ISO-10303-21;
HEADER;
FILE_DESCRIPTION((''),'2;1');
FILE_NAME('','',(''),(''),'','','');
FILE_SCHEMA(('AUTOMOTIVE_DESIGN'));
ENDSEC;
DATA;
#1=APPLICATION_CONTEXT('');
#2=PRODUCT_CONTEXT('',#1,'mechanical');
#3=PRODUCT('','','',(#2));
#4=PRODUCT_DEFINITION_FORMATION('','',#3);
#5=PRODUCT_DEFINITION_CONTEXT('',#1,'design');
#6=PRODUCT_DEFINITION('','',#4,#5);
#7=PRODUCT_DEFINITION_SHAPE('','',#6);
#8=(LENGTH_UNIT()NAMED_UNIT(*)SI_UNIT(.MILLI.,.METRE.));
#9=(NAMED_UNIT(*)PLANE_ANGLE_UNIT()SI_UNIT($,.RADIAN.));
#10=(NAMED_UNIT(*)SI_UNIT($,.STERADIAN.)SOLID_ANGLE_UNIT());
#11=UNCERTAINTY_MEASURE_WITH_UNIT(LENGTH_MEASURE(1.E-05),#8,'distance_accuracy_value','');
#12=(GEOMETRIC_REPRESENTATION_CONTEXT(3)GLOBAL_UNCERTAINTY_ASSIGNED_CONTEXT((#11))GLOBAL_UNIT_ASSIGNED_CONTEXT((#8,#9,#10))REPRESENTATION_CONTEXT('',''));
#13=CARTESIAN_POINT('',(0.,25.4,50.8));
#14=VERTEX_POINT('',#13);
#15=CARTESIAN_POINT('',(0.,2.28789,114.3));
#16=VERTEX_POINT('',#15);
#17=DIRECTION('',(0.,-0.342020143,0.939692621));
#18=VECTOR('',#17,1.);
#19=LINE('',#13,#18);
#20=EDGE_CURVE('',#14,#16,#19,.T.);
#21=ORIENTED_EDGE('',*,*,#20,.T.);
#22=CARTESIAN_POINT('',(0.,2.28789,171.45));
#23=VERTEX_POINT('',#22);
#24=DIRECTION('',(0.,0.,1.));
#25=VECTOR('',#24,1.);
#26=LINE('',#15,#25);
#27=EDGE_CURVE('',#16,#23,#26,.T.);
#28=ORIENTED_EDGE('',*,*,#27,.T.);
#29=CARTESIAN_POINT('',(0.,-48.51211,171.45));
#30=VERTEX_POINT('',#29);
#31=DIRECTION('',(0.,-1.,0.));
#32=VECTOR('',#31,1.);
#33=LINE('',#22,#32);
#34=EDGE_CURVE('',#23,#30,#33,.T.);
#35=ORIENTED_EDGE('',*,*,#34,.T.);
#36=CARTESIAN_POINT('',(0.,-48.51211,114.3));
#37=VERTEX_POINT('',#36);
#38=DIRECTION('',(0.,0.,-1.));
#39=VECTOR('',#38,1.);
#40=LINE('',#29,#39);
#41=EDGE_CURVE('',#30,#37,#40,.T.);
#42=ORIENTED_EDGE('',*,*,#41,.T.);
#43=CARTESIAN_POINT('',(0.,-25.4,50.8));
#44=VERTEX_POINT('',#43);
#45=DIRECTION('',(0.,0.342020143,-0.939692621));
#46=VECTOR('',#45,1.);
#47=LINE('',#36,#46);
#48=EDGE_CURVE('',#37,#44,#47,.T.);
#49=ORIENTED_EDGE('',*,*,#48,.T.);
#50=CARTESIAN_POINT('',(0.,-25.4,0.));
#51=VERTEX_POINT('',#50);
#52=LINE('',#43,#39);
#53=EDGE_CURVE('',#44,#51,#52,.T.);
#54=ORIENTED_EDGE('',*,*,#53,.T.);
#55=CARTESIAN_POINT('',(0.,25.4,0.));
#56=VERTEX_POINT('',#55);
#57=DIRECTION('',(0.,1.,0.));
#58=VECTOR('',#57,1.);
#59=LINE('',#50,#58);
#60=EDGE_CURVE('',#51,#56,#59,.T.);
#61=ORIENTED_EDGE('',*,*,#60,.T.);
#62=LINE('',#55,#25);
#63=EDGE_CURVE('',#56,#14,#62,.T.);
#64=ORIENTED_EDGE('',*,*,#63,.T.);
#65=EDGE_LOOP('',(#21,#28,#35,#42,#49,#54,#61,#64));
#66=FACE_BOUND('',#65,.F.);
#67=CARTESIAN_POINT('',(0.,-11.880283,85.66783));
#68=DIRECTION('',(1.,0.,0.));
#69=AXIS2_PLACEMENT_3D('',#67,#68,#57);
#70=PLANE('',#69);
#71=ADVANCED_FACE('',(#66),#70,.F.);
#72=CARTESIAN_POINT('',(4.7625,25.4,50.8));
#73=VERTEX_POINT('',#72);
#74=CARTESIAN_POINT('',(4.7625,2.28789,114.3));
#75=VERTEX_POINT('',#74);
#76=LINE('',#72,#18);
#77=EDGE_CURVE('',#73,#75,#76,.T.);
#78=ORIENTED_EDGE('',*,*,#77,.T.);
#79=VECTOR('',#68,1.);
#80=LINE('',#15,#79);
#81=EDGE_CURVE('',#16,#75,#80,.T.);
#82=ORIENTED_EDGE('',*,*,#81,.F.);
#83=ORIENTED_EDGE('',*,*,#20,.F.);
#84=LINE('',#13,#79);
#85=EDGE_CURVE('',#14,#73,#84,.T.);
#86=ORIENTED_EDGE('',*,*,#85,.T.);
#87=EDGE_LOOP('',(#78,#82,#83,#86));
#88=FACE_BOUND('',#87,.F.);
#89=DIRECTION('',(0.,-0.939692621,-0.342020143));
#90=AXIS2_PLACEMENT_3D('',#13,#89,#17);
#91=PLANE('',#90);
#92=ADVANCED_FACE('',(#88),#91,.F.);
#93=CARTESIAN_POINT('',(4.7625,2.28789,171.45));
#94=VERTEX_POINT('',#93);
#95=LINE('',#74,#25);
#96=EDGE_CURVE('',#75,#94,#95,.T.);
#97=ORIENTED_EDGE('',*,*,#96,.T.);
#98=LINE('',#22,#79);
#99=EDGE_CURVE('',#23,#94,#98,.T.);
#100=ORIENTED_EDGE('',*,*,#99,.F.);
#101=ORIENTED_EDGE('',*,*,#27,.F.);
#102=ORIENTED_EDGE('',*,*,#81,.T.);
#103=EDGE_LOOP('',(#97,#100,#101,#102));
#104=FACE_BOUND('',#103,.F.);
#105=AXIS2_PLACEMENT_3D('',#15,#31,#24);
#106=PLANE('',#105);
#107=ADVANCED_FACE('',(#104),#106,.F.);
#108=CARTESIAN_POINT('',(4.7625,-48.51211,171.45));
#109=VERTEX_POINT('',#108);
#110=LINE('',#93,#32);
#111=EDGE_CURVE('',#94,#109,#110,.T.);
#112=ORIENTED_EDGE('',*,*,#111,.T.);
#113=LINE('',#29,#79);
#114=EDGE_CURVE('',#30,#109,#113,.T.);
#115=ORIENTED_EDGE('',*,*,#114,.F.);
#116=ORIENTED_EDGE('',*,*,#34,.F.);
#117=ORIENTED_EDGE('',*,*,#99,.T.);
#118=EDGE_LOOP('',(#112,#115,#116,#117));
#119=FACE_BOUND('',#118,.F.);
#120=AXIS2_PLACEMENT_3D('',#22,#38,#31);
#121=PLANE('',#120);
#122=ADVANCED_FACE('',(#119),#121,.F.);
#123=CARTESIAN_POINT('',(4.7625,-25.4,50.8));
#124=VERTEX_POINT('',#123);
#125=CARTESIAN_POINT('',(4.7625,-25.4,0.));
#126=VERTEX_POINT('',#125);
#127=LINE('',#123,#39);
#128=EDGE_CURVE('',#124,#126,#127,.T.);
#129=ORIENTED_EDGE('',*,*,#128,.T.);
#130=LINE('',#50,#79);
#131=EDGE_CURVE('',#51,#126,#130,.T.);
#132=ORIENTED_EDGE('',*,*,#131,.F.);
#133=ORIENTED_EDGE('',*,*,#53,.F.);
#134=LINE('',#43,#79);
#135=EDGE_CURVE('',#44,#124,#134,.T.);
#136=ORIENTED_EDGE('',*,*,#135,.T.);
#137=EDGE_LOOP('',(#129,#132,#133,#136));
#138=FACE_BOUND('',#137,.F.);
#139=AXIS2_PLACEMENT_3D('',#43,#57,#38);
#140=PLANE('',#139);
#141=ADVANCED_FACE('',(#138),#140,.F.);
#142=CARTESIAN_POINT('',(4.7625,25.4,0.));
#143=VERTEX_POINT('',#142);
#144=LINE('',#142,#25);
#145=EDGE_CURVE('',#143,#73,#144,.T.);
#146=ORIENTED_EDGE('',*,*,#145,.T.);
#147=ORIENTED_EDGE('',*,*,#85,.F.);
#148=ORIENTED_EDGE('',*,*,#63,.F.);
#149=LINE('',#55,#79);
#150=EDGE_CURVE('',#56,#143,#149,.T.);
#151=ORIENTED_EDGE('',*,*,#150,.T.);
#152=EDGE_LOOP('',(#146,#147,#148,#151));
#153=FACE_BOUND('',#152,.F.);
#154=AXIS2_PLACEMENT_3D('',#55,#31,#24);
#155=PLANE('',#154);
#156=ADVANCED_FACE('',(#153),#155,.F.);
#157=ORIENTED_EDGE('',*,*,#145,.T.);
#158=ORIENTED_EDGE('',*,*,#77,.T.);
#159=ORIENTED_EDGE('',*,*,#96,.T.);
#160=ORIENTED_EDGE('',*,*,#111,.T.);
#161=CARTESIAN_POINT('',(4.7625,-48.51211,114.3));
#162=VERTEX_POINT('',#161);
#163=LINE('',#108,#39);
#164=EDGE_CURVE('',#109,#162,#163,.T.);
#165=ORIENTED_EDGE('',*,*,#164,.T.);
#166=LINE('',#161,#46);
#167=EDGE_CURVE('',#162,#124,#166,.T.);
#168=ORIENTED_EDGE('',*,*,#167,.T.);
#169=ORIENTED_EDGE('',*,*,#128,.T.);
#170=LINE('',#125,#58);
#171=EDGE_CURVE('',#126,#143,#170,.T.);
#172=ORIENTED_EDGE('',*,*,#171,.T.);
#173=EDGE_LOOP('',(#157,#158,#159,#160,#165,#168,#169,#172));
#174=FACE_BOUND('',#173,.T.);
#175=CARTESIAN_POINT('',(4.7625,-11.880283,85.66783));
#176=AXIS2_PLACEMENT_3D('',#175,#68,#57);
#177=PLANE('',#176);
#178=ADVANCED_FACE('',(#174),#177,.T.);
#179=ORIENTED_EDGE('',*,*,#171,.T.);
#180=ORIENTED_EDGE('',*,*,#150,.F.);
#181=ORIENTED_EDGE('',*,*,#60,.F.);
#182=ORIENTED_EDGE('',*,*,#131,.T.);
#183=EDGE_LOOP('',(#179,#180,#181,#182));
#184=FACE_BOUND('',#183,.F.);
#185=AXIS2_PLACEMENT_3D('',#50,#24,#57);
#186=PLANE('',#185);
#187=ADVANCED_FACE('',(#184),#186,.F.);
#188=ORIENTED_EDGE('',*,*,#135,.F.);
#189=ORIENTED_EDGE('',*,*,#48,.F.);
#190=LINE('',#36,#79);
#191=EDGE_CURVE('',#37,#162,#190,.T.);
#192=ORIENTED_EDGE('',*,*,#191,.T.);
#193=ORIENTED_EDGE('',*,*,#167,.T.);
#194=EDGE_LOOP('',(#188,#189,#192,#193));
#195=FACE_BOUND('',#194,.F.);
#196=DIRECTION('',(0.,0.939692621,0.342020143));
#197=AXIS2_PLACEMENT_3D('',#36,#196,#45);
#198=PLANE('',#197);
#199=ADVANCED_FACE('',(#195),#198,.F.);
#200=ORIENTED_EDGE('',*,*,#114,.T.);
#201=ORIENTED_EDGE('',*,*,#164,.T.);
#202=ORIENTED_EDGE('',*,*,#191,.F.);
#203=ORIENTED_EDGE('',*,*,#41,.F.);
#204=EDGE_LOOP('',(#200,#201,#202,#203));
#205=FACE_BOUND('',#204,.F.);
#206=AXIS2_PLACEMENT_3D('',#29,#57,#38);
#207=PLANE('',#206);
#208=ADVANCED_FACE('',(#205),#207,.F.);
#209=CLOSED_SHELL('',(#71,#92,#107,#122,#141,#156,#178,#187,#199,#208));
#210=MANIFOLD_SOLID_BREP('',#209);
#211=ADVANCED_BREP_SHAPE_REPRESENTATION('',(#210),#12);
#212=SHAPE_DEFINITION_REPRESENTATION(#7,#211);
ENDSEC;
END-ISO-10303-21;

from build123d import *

# Parameters (mm, degrees)
F1_DEPTH = 4.7625


# Not quite as in the source:
# - a feature names something its author has since deleted; it is built from what else it names


with BuildPart() as f1:
    # F0 (on Right) → F1 (new body)
    with BuildSketch(Plane.YZ):
        Polygon((-48.5121098759, 114.3), (-25.4, 50.8), (-25.4, 0), (25.4, 0), (25.4, 50.8), (2.2878901241, 114.3), (2.2878901241, 171.45), (-48.5121098759, 171.45), align=None)
    extrude(amount=F1_DEPTH)


solid = f1.part
